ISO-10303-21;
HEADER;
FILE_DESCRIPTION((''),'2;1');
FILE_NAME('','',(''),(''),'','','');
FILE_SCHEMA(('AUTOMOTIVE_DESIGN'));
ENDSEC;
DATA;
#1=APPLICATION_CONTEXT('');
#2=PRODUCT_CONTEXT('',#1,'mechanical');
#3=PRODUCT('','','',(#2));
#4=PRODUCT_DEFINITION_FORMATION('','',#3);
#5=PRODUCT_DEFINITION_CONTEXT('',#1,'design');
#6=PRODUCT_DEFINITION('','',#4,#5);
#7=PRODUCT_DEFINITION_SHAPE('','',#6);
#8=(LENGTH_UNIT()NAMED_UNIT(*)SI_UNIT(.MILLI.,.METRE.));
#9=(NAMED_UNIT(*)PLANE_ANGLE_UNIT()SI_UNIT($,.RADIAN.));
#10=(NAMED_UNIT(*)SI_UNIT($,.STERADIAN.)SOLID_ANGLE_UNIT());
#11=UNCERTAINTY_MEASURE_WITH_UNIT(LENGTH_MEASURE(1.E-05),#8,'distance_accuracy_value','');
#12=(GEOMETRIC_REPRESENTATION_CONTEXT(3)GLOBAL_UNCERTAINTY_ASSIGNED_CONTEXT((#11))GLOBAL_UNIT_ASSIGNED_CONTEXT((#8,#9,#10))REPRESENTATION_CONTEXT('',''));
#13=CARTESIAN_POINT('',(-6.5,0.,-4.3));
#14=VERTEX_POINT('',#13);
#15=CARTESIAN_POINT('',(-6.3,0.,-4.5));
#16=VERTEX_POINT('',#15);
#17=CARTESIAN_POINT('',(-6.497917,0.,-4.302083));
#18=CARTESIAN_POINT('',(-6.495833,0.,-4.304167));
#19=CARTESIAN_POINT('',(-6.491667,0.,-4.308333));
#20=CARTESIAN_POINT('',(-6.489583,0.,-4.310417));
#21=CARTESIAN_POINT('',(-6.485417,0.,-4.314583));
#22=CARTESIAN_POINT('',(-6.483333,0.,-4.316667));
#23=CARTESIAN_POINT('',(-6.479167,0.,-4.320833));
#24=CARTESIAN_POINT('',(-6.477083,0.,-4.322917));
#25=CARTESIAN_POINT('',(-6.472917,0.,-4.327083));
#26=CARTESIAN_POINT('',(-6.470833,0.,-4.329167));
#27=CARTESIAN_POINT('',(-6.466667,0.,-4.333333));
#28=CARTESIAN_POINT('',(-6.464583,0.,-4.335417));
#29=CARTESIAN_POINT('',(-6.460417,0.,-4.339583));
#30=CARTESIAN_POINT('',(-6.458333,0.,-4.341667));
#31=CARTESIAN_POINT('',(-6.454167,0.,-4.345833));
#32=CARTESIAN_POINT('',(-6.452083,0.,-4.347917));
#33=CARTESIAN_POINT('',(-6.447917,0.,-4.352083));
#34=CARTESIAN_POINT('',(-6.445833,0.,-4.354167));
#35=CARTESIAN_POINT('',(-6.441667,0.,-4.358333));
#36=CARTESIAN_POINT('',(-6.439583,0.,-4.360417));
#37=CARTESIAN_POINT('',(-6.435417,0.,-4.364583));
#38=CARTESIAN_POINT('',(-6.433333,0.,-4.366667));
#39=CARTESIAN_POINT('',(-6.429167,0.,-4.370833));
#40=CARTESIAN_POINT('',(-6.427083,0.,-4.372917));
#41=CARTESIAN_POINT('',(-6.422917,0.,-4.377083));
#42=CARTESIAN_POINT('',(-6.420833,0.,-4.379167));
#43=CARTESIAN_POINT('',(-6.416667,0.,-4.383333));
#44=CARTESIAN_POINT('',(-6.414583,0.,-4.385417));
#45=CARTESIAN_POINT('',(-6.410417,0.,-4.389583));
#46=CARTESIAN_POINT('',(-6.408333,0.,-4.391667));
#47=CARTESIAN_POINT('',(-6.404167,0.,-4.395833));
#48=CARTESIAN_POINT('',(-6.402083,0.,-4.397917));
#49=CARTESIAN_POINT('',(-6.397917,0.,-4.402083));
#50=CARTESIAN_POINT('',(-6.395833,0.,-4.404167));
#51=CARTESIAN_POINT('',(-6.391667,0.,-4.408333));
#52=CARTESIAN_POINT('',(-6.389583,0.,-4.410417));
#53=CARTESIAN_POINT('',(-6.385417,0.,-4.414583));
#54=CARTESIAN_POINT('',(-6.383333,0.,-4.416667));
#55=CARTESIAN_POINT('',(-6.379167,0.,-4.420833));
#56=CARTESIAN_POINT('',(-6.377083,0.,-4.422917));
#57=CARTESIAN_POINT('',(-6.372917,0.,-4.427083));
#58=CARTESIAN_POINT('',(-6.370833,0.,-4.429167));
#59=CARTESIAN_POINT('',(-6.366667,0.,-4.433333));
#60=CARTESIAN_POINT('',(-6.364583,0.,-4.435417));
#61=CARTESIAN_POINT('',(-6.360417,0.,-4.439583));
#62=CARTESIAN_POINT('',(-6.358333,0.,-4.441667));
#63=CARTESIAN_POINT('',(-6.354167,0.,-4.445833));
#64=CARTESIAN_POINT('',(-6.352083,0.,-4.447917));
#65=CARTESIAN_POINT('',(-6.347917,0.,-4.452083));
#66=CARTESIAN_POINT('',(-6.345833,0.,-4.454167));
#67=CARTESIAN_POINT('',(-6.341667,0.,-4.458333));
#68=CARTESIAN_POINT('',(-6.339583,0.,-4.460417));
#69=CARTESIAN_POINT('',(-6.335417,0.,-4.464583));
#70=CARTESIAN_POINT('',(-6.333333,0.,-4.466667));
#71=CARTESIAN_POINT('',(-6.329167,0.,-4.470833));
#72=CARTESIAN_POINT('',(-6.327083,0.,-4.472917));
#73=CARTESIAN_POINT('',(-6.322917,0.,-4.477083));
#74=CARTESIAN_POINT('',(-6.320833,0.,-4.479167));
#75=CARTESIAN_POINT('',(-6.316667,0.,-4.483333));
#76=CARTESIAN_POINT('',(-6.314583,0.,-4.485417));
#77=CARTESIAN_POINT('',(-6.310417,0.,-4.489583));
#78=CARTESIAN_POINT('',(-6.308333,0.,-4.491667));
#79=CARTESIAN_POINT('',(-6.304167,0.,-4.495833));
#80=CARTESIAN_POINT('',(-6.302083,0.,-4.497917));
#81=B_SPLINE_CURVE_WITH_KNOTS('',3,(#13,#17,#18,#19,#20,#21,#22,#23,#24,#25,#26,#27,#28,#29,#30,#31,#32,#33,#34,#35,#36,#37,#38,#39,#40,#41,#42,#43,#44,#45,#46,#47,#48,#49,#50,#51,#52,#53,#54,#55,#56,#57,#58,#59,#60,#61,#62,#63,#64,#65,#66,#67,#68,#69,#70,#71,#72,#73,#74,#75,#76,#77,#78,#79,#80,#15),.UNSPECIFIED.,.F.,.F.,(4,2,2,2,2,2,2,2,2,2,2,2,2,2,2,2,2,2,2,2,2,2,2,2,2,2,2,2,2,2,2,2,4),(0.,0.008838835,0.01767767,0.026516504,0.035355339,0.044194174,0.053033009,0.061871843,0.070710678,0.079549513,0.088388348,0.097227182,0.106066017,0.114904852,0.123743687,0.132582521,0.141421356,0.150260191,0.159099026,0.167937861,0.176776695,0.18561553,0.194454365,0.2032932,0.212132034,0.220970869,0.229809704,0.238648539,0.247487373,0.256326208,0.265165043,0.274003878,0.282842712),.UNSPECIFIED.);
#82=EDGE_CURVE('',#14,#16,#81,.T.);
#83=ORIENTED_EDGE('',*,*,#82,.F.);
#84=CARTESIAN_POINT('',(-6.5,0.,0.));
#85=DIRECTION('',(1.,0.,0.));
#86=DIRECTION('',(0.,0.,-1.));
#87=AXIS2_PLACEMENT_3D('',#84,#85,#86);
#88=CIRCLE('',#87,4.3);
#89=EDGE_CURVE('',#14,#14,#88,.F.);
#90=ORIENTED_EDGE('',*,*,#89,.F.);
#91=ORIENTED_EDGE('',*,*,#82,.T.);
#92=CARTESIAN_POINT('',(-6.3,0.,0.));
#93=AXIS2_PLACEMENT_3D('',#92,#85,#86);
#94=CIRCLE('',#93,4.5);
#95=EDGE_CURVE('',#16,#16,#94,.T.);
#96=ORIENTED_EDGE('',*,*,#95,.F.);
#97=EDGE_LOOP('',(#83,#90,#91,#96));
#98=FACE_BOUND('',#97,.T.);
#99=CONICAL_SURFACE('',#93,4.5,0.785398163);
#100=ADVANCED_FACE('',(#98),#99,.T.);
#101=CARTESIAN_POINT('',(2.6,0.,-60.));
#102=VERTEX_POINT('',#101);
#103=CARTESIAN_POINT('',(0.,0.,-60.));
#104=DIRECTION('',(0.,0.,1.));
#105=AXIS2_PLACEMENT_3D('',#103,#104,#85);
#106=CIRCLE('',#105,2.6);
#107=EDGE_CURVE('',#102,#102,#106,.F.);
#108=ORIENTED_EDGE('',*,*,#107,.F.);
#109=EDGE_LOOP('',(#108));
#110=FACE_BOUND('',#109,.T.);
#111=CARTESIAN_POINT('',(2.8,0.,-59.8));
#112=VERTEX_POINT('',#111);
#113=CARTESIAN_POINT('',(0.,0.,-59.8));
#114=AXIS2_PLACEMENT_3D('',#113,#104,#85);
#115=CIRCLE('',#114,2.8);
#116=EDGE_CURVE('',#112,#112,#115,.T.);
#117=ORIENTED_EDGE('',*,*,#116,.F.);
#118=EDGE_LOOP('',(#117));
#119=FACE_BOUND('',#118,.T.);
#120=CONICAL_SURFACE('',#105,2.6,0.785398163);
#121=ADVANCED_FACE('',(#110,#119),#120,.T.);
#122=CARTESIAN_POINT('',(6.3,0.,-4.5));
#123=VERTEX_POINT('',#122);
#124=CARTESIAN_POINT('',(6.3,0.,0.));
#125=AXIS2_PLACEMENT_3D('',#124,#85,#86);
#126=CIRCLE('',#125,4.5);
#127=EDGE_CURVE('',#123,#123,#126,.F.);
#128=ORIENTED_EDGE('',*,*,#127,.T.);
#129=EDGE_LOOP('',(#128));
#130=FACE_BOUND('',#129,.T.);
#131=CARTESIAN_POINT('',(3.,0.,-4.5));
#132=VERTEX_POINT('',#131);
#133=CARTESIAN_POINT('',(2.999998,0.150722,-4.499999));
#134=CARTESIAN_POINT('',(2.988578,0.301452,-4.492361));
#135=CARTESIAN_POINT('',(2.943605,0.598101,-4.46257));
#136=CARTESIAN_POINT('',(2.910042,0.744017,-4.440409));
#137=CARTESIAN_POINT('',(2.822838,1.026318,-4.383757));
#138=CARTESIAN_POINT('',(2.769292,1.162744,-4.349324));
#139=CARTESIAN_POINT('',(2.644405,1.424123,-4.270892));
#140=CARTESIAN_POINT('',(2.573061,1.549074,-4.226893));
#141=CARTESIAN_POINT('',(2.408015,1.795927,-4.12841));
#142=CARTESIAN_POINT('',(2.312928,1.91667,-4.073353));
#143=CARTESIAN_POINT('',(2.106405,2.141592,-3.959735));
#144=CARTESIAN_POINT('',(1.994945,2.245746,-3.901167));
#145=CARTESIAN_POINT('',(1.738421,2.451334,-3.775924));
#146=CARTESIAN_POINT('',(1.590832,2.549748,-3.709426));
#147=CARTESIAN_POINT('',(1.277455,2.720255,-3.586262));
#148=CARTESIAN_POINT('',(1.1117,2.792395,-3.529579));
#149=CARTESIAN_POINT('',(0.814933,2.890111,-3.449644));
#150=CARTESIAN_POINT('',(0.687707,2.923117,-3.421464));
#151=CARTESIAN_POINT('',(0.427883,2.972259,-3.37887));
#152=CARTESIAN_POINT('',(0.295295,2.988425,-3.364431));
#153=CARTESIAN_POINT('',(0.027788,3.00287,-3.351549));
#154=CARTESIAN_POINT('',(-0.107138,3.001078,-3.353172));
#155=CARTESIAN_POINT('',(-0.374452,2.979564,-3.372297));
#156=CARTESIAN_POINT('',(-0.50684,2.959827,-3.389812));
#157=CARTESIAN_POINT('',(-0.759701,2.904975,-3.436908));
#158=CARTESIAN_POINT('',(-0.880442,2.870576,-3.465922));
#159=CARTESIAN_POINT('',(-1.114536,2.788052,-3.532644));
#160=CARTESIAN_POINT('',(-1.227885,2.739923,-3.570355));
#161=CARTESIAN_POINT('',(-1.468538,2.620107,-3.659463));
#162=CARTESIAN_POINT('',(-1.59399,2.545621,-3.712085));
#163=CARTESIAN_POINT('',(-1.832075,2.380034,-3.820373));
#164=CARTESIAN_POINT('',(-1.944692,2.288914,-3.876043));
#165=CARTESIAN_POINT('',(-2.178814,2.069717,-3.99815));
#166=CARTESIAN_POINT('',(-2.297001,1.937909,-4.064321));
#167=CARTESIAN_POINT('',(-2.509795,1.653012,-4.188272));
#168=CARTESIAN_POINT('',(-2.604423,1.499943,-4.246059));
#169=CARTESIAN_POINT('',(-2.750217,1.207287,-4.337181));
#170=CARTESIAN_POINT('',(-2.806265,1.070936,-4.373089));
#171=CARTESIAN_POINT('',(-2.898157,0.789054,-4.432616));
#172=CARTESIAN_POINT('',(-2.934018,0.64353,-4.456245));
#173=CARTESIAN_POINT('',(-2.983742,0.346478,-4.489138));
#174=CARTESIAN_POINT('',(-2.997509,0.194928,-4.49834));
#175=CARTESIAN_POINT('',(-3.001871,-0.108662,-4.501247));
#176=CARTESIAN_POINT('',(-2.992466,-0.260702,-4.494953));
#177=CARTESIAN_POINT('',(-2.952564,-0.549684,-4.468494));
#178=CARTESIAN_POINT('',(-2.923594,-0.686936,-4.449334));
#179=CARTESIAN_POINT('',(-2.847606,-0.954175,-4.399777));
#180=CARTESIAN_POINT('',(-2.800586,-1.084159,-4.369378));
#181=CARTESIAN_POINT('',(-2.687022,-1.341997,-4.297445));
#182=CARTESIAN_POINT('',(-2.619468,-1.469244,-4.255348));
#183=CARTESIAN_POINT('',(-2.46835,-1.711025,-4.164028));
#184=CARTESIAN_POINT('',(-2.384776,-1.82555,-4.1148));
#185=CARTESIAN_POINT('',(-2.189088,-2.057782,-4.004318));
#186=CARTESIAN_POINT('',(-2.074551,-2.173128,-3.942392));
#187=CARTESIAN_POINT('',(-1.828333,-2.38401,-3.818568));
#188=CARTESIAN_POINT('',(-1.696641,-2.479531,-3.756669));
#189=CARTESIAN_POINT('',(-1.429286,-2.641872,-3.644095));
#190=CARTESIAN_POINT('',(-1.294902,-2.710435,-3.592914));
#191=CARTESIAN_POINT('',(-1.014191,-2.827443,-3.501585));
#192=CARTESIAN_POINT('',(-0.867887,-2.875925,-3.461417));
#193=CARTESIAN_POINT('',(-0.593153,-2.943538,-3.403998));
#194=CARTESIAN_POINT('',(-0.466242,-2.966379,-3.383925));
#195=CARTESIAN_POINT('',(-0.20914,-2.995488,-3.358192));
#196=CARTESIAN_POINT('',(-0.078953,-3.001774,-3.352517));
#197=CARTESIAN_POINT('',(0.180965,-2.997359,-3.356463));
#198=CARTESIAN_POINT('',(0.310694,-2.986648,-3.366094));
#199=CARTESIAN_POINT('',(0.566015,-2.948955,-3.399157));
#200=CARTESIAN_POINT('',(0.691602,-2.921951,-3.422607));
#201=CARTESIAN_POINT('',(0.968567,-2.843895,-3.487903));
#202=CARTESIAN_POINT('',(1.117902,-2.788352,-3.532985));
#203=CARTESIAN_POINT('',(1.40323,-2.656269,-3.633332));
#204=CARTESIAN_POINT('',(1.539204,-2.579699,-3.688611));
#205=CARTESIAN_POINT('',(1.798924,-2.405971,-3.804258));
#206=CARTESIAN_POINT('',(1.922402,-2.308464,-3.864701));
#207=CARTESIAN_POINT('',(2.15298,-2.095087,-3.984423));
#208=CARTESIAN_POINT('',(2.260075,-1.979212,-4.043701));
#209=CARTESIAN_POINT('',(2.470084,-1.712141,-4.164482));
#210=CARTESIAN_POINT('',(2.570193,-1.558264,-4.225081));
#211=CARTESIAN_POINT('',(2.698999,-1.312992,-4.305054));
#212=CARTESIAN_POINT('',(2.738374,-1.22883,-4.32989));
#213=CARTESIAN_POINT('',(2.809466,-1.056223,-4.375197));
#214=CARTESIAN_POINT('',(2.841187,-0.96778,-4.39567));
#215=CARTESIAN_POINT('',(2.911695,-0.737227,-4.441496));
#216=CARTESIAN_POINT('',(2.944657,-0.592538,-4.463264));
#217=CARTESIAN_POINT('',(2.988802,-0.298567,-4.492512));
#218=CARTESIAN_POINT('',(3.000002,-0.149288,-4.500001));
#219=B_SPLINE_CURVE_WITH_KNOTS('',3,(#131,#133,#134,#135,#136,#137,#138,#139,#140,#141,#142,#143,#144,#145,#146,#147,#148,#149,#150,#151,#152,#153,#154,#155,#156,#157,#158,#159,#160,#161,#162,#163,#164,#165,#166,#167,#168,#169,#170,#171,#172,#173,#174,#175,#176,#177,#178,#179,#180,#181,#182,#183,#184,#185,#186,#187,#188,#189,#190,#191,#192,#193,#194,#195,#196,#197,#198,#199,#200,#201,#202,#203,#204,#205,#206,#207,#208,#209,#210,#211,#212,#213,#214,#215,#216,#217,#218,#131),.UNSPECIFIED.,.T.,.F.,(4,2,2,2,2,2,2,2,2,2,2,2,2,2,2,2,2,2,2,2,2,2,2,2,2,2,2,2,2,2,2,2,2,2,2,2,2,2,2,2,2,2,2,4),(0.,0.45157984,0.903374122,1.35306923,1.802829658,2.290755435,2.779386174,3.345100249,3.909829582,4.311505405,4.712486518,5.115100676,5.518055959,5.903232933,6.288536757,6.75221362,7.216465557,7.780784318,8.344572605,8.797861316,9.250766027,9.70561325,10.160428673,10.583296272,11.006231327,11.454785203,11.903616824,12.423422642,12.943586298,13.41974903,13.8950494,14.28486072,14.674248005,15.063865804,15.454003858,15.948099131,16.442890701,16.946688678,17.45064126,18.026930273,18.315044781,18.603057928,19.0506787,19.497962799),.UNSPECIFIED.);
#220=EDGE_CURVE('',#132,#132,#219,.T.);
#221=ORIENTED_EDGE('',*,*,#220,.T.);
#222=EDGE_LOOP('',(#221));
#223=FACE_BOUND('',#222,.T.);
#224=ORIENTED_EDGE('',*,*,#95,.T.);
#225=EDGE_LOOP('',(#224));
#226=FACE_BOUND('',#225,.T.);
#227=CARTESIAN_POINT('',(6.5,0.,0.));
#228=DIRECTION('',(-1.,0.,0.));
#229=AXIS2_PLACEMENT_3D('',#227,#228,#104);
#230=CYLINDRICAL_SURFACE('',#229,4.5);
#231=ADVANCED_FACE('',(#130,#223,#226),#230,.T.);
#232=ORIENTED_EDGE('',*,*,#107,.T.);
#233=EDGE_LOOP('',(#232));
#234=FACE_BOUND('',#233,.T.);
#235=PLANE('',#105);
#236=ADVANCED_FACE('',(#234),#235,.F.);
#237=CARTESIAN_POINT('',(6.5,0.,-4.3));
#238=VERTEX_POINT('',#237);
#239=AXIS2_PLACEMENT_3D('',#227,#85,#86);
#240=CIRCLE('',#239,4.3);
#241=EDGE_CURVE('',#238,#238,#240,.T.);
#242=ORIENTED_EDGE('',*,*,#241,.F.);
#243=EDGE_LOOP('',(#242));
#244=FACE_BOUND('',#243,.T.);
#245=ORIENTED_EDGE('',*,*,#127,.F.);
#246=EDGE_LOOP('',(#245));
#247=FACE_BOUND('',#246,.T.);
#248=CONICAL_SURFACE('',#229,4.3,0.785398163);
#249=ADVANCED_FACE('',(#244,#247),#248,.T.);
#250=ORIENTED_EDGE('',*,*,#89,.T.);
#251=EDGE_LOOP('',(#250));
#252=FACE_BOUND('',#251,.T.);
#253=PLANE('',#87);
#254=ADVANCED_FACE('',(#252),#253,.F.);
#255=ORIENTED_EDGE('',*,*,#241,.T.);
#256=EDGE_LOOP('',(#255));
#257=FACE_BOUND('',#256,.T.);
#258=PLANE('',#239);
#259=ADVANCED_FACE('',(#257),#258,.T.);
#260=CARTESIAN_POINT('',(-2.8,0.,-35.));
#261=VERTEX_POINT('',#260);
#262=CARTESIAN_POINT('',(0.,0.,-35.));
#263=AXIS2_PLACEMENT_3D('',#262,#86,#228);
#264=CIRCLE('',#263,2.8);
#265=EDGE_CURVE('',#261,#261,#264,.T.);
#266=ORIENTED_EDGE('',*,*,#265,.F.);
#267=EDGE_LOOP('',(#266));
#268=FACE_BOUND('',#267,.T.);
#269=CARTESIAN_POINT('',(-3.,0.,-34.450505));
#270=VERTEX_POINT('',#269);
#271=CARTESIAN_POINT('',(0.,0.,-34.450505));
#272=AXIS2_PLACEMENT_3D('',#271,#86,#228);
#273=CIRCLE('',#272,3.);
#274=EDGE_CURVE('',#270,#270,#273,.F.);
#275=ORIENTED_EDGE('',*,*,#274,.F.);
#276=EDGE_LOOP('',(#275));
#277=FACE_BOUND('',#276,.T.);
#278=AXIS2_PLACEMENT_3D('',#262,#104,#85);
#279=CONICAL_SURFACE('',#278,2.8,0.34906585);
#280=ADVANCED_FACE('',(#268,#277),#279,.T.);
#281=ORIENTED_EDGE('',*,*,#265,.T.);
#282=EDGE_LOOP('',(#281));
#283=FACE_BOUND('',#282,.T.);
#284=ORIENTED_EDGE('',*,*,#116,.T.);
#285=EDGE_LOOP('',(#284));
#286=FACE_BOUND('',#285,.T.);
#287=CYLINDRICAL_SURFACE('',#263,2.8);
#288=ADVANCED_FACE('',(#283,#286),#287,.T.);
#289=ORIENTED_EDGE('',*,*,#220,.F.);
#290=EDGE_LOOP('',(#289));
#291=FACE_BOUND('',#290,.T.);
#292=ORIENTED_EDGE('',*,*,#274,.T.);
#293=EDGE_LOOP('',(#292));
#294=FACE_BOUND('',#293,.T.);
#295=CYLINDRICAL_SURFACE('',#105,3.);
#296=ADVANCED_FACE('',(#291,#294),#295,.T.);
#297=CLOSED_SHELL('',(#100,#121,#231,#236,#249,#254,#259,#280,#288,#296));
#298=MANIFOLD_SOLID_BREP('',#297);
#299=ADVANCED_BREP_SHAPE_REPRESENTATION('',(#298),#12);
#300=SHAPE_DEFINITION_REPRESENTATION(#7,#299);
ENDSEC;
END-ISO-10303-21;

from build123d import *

# Parameters (mm, degrees)
SKETCH1_R               = 4.5
BOSS_EXTRUDE1_DEPTH     = 6.5
SKETCH2_R               = 3
BOSS_EXTRUDE2_DEPTH     = 60
CUT_EXTRUDE_THIN1_START = -25
SKETCH3_R               = 3
SKETCH3_R_2             = 2.8
CUT_EXTRUDE_THIN1_DEPTH = 25
CHAMFER1_SIZE2          = 0.2
CHAMFER1_SIZE           = 0.549495484
CHAMFER2_SIZE           = 0.2
CHAMFER3_SIZE           = 0.2


with BuildPart() as part:
    # Sketch1 → Boss-Extrude1 (new, symmetric)
    with BuildSketch(Plane(origin=(0, 0, 0), x_dir=(0, 0, -1), z_dir=(1, 0, 0))):
        with Locations(Location((0, 0, 0), (0, 0, 180))):
            Circle(SKETCH1_R)
    extrude(amount=BOSS_EXTRUDE1_DEPTH, both=True)

    # Sketch2 → Boss-Extrude2 (add)
    with BuildSketch(Plane.XY):
        Circle(SKETCH2_R)
    extrude(amount=-BOSS_EXTRUDE2_DEPTH)

    # Sketch3 → Cut-Extrude-Thin1 (cut)
    with BuildSketch(Plane(origin=(0, 0, -60), x_dir=(-1, 0, 0), z_dir=(0, 0, -1)).offset(CUT_EXTRUDE_THIN1_START)):
        Circle(SKETCH3_R)
        Circle(SKETCH3_R_2, mode=Mode.SUBTRACT)
    extrude(amount=CUT_EXTRUDE_THIN1_DEPTH, mode=Mode.SUBTRACT)

    # Chamfer1
    chamfer1_edges = [part.edges().sort_by_distance(p)[0] for p in [
        (-3, 0, -35),
    ]]
    chamfer1_side = [part.faces().sort_by_distance(p)[0] for p in [
        (-3, 0, -34.996),
    ]]
    chamfer(chamfer1_edges, length=CHAMFER1_SIZE - 0.0001, length2=CHAMFER1_SIZE2 - 0.0001, reference=chamfer1_side[0])  # a hair under: the kernel refuses the full size

    # Chamfer2
    chamfer2_edges = [part.edges().sort_by_distance(p)[0] for p in [
        (-6.5, 0, -4.5),
        (6.5, 0, -4.5),
    ]]
    chamfer(chamfer2_edges, length=CHAMFER2_SIZE)

    # Chamfer3
    chamfer3_edges = [part.edges().sort_by_distance(p)[0] for p in [
        (2.8, 0, -60),
    ]]
    chamfer(chamfer3_edges, length=CHAMFER3_SIZE)


solid = part.part
